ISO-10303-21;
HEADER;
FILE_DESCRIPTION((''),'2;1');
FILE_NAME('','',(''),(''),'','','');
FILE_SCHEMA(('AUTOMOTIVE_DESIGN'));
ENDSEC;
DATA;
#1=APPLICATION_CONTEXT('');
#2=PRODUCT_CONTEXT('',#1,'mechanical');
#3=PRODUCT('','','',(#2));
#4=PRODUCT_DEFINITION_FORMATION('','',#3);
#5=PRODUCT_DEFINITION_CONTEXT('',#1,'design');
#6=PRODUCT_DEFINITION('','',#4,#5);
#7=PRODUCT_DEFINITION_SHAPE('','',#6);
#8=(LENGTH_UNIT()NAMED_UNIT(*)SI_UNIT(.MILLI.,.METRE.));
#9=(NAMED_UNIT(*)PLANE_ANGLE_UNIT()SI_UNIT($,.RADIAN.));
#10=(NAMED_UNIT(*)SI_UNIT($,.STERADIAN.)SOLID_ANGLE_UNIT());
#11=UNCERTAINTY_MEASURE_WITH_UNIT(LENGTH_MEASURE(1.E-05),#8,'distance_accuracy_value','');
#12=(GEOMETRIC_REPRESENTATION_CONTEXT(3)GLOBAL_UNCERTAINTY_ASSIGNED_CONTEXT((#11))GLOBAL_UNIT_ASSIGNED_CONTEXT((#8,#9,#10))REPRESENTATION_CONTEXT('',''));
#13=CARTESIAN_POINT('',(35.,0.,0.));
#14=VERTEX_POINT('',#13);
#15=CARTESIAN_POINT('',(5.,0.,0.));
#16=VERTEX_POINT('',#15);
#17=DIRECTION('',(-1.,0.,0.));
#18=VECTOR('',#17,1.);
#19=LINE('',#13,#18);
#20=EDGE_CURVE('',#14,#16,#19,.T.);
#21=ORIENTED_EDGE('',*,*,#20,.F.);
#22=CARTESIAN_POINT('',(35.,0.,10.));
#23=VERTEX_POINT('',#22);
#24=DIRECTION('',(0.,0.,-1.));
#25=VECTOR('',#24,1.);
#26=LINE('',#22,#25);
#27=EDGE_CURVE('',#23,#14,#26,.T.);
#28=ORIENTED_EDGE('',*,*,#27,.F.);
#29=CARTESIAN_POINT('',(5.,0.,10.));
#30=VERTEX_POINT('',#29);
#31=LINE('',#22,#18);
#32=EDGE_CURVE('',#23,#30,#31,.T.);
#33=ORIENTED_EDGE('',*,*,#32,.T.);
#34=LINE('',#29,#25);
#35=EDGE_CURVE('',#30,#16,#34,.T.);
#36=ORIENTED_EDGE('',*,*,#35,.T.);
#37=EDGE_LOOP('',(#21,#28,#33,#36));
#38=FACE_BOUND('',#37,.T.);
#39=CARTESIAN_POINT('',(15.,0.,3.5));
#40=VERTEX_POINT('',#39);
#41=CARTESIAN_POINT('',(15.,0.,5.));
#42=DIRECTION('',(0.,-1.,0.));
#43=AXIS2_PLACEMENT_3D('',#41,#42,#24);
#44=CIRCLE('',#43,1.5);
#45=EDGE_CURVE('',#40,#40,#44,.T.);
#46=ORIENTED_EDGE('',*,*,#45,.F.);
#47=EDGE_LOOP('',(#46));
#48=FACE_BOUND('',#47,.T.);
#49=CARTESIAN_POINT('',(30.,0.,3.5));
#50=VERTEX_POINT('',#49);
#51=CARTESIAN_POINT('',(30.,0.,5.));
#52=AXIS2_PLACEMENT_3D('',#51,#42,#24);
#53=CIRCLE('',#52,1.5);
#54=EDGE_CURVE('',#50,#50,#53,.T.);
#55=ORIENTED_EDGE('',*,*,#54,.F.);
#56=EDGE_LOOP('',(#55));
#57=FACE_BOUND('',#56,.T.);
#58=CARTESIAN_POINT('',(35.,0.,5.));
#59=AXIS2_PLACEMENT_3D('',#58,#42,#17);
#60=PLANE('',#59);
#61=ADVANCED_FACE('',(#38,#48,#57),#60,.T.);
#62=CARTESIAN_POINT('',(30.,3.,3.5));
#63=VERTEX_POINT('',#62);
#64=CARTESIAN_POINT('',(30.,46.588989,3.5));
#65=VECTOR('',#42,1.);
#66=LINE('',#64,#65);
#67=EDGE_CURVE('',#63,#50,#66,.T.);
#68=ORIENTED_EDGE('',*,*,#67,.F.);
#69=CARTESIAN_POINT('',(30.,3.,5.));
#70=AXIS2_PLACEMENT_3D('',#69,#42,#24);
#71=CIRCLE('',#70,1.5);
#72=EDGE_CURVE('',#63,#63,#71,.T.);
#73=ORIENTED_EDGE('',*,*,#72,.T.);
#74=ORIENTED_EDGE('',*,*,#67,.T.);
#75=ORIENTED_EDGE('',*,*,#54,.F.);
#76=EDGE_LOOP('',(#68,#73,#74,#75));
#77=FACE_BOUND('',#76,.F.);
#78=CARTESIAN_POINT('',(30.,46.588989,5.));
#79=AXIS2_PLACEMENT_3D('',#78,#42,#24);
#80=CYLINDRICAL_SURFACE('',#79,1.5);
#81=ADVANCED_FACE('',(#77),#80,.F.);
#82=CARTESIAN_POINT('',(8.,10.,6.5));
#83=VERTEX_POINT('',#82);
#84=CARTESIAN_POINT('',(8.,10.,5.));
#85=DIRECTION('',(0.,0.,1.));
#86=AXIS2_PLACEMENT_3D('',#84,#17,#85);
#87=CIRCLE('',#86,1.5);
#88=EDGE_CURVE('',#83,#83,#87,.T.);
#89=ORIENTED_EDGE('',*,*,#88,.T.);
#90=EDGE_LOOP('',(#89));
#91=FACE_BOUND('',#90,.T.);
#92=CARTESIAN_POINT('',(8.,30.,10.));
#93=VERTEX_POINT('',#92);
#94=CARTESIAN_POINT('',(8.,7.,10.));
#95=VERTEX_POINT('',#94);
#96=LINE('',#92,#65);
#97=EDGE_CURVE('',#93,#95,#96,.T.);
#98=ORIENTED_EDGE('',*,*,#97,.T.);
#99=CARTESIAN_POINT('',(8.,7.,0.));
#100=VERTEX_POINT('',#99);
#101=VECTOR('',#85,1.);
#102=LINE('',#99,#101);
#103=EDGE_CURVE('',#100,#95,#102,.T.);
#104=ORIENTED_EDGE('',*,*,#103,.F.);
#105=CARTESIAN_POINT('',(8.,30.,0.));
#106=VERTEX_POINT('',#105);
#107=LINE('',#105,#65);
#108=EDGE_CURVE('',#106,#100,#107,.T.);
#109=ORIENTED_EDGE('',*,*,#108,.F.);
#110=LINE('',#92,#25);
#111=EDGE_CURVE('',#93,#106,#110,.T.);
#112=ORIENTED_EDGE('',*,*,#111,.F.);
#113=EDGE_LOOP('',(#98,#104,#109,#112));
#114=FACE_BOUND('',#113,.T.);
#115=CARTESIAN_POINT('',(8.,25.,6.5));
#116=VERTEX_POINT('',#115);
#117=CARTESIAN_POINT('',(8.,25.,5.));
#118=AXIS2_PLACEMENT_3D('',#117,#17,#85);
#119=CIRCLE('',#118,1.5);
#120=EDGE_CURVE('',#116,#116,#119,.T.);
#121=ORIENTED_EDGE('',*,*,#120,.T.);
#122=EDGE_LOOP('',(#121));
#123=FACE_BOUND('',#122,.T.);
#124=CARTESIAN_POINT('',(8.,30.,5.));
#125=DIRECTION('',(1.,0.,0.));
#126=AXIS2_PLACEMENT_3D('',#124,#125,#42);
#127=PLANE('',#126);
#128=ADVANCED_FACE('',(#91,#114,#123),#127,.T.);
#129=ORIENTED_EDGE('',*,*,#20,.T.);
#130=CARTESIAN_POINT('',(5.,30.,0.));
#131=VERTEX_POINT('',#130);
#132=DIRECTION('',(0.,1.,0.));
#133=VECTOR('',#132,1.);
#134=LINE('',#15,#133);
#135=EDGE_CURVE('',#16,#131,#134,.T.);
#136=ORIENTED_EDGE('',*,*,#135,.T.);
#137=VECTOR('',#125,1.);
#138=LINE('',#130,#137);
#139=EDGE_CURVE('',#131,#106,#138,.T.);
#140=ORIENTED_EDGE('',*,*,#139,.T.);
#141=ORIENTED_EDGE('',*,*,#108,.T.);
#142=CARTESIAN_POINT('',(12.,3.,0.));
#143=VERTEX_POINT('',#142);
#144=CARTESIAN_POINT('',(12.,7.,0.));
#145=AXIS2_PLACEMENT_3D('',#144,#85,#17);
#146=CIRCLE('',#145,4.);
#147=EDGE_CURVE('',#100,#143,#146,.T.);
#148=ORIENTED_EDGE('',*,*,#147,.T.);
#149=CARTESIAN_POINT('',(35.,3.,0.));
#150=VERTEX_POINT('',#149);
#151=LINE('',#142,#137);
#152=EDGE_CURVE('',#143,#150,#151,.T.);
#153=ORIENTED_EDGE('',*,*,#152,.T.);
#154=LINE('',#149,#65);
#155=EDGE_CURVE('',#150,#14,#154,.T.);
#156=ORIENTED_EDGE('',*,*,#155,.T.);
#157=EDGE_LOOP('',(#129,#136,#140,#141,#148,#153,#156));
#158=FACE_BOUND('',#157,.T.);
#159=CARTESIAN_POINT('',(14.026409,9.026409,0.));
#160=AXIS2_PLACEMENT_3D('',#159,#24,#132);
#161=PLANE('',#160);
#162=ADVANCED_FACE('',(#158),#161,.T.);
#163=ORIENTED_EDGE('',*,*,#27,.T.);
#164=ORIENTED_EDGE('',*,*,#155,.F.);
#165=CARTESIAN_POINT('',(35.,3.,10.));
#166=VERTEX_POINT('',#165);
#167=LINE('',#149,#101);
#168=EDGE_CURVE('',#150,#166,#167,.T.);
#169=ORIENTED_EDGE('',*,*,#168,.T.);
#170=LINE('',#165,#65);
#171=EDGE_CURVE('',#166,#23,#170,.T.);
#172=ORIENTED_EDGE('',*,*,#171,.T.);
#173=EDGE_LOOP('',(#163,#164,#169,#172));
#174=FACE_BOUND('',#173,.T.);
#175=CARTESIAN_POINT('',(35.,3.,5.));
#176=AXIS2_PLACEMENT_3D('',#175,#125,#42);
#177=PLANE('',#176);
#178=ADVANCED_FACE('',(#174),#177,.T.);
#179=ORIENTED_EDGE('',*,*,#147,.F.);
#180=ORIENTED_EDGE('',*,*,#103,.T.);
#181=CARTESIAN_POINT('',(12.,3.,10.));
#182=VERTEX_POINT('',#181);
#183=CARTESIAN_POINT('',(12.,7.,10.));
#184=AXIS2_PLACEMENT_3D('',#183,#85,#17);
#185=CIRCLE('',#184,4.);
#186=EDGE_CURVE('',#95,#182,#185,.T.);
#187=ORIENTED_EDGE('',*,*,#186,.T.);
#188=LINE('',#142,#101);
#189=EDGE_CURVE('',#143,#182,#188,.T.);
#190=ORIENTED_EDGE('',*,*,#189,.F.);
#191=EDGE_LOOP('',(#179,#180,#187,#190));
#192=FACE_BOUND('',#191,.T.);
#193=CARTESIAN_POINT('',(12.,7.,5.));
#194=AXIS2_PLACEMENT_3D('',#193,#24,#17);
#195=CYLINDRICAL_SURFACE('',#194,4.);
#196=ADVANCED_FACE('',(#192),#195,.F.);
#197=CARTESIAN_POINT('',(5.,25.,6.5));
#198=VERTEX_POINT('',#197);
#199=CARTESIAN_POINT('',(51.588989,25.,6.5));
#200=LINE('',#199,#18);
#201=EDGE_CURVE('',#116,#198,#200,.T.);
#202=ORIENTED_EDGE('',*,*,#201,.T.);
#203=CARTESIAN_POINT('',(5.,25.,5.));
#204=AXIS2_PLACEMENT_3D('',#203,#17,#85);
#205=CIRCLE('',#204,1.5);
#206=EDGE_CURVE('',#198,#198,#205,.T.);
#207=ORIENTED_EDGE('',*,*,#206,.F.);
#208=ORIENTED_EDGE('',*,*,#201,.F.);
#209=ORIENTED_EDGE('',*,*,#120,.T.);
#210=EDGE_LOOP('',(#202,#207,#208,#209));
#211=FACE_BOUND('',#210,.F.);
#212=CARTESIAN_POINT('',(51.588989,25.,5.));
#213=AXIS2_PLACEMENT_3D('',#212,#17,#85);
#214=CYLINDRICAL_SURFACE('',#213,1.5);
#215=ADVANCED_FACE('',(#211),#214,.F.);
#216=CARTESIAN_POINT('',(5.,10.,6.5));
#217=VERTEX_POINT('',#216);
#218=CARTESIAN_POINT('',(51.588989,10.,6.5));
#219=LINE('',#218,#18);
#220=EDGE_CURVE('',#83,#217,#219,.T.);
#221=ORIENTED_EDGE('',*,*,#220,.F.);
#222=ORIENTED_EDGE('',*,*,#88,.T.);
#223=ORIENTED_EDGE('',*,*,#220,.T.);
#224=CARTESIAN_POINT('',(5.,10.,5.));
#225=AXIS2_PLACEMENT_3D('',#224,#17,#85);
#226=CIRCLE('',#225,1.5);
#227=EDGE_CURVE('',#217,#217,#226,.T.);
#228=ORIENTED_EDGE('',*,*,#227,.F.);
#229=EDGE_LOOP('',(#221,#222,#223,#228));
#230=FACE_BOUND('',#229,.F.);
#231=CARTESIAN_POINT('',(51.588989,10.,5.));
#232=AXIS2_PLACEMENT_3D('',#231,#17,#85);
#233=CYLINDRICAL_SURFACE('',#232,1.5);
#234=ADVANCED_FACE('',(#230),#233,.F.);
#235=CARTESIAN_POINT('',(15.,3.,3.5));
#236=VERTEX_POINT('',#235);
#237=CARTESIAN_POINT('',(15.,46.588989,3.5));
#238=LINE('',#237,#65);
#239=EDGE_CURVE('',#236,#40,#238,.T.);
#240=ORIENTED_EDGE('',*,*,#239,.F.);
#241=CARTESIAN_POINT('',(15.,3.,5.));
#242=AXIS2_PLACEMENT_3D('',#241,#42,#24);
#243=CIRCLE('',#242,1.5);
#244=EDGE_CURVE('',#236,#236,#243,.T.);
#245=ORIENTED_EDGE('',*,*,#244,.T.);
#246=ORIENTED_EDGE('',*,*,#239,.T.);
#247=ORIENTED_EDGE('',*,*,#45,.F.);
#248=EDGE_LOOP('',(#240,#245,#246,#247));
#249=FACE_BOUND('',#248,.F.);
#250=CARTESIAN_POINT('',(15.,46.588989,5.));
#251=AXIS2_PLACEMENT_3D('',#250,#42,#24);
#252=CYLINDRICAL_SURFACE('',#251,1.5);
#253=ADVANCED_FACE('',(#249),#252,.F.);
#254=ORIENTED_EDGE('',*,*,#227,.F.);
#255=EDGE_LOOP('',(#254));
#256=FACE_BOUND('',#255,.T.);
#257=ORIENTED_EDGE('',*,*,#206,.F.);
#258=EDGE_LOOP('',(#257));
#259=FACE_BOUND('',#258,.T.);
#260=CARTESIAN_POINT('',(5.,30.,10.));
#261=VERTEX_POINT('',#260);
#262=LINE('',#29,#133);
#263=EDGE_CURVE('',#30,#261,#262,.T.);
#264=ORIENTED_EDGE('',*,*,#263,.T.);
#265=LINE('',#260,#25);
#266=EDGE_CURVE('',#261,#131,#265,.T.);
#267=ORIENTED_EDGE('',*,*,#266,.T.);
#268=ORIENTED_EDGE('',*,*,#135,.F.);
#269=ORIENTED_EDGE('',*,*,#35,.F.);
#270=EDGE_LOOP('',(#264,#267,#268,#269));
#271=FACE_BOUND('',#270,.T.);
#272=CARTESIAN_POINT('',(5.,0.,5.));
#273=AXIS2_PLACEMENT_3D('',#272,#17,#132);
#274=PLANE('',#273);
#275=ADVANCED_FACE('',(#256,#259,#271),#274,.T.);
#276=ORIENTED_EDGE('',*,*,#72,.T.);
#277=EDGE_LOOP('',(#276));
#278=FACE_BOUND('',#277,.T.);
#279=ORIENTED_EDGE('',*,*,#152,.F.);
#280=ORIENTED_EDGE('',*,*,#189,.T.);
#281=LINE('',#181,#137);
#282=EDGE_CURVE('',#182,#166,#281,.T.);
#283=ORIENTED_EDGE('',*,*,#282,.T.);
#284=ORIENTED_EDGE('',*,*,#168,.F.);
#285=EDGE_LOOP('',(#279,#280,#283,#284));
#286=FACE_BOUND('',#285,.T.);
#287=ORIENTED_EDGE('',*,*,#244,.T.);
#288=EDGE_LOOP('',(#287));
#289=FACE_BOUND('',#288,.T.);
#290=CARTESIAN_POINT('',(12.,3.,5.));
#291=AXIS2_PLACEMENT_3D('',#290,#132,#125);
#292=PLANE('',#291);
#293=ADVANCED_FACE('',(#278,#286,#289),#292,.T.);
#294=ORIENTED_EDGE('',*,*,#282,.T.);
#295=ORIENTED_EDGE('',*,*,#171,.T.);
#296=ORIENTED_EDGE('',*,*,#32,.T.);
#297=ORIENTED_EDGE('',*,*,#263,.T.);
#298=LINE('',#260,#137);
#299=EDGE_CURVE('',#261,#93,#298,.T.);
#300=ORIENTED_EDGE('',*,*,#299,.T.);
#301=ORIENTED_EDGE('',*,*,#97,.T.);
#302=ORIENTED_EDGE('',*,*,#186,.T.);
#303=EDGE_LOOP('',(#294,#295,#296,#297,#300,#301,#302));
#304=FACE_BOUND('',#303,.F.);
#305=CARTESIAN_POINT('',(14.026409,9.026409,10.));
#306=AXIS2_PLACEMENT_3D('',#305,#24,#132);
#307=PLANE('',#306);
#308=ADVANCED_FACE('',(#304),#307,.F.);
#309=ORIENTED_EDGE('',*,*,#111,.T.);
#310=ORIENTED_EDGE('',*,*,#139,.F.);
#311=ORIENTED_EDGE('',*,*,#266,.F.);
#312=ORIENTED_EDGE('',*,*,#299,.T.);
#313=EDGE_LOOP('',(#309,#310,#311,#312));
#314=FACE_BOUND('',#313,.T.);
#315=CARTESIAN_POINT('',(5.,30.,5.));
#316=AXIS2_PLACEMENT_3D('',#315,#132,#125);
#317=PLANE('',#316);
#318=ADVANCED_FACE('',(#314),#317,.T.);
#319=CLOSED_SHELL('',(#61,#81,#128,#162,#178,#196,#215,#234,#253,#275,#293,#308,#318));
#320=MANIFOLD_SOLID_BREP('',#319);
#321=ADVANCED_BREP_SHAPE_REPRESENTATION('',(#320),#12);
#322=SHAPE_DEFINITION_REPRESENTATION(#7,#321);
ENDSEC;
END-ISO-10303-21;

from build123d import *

# Parameters (mm, degrees)
F1_DEPTH   = 5
F4_D       = 3
F4_ON_F3_D = 3
F5_ANGLE   = 90


with BuildPart() as f1:
    # F0 (on Right) → F1 (new body, symmetric)
    with BuildSketch(Plane.YZ):
        with BuildLine():
            Line((3, 30), (0, 30))
            Line((0, 30), (0, 0))
            Line((0, 0), (30, 0))
            Line((30, 0), (30, 3))
            Line((30, 3), (7, 3))
            ThreePointArc((7, 3), (4.1715728753, 4.1715728753), (3, 7))
            Line((3, 7), (3, 30))
        make_face()
    extrude(amount=F1_DEPTH, both=True)

    # F4 (through all)
    with Locations(Plane.XY.offset(3)):
        with Locations((0, 25), (0, 10)):
            Hole(F4_D / 2)

    # F4 on F3 (through all)
    with Locations(Plane(origin=(0, 3, 0), x_dir=(-1, 0, 0), z_dir=(0, 1, 0))):
        with Locations((0, 25), (0, 10)):
            Hole(F4_ON_F3_D / 2)


with BuildPart() as f1_1:
    # F5: moved
    add(f1.part.rotate(Axis((5, 15, 0), (0, 1, 0)), F5_ANGLE))


solid = f1_1.part
